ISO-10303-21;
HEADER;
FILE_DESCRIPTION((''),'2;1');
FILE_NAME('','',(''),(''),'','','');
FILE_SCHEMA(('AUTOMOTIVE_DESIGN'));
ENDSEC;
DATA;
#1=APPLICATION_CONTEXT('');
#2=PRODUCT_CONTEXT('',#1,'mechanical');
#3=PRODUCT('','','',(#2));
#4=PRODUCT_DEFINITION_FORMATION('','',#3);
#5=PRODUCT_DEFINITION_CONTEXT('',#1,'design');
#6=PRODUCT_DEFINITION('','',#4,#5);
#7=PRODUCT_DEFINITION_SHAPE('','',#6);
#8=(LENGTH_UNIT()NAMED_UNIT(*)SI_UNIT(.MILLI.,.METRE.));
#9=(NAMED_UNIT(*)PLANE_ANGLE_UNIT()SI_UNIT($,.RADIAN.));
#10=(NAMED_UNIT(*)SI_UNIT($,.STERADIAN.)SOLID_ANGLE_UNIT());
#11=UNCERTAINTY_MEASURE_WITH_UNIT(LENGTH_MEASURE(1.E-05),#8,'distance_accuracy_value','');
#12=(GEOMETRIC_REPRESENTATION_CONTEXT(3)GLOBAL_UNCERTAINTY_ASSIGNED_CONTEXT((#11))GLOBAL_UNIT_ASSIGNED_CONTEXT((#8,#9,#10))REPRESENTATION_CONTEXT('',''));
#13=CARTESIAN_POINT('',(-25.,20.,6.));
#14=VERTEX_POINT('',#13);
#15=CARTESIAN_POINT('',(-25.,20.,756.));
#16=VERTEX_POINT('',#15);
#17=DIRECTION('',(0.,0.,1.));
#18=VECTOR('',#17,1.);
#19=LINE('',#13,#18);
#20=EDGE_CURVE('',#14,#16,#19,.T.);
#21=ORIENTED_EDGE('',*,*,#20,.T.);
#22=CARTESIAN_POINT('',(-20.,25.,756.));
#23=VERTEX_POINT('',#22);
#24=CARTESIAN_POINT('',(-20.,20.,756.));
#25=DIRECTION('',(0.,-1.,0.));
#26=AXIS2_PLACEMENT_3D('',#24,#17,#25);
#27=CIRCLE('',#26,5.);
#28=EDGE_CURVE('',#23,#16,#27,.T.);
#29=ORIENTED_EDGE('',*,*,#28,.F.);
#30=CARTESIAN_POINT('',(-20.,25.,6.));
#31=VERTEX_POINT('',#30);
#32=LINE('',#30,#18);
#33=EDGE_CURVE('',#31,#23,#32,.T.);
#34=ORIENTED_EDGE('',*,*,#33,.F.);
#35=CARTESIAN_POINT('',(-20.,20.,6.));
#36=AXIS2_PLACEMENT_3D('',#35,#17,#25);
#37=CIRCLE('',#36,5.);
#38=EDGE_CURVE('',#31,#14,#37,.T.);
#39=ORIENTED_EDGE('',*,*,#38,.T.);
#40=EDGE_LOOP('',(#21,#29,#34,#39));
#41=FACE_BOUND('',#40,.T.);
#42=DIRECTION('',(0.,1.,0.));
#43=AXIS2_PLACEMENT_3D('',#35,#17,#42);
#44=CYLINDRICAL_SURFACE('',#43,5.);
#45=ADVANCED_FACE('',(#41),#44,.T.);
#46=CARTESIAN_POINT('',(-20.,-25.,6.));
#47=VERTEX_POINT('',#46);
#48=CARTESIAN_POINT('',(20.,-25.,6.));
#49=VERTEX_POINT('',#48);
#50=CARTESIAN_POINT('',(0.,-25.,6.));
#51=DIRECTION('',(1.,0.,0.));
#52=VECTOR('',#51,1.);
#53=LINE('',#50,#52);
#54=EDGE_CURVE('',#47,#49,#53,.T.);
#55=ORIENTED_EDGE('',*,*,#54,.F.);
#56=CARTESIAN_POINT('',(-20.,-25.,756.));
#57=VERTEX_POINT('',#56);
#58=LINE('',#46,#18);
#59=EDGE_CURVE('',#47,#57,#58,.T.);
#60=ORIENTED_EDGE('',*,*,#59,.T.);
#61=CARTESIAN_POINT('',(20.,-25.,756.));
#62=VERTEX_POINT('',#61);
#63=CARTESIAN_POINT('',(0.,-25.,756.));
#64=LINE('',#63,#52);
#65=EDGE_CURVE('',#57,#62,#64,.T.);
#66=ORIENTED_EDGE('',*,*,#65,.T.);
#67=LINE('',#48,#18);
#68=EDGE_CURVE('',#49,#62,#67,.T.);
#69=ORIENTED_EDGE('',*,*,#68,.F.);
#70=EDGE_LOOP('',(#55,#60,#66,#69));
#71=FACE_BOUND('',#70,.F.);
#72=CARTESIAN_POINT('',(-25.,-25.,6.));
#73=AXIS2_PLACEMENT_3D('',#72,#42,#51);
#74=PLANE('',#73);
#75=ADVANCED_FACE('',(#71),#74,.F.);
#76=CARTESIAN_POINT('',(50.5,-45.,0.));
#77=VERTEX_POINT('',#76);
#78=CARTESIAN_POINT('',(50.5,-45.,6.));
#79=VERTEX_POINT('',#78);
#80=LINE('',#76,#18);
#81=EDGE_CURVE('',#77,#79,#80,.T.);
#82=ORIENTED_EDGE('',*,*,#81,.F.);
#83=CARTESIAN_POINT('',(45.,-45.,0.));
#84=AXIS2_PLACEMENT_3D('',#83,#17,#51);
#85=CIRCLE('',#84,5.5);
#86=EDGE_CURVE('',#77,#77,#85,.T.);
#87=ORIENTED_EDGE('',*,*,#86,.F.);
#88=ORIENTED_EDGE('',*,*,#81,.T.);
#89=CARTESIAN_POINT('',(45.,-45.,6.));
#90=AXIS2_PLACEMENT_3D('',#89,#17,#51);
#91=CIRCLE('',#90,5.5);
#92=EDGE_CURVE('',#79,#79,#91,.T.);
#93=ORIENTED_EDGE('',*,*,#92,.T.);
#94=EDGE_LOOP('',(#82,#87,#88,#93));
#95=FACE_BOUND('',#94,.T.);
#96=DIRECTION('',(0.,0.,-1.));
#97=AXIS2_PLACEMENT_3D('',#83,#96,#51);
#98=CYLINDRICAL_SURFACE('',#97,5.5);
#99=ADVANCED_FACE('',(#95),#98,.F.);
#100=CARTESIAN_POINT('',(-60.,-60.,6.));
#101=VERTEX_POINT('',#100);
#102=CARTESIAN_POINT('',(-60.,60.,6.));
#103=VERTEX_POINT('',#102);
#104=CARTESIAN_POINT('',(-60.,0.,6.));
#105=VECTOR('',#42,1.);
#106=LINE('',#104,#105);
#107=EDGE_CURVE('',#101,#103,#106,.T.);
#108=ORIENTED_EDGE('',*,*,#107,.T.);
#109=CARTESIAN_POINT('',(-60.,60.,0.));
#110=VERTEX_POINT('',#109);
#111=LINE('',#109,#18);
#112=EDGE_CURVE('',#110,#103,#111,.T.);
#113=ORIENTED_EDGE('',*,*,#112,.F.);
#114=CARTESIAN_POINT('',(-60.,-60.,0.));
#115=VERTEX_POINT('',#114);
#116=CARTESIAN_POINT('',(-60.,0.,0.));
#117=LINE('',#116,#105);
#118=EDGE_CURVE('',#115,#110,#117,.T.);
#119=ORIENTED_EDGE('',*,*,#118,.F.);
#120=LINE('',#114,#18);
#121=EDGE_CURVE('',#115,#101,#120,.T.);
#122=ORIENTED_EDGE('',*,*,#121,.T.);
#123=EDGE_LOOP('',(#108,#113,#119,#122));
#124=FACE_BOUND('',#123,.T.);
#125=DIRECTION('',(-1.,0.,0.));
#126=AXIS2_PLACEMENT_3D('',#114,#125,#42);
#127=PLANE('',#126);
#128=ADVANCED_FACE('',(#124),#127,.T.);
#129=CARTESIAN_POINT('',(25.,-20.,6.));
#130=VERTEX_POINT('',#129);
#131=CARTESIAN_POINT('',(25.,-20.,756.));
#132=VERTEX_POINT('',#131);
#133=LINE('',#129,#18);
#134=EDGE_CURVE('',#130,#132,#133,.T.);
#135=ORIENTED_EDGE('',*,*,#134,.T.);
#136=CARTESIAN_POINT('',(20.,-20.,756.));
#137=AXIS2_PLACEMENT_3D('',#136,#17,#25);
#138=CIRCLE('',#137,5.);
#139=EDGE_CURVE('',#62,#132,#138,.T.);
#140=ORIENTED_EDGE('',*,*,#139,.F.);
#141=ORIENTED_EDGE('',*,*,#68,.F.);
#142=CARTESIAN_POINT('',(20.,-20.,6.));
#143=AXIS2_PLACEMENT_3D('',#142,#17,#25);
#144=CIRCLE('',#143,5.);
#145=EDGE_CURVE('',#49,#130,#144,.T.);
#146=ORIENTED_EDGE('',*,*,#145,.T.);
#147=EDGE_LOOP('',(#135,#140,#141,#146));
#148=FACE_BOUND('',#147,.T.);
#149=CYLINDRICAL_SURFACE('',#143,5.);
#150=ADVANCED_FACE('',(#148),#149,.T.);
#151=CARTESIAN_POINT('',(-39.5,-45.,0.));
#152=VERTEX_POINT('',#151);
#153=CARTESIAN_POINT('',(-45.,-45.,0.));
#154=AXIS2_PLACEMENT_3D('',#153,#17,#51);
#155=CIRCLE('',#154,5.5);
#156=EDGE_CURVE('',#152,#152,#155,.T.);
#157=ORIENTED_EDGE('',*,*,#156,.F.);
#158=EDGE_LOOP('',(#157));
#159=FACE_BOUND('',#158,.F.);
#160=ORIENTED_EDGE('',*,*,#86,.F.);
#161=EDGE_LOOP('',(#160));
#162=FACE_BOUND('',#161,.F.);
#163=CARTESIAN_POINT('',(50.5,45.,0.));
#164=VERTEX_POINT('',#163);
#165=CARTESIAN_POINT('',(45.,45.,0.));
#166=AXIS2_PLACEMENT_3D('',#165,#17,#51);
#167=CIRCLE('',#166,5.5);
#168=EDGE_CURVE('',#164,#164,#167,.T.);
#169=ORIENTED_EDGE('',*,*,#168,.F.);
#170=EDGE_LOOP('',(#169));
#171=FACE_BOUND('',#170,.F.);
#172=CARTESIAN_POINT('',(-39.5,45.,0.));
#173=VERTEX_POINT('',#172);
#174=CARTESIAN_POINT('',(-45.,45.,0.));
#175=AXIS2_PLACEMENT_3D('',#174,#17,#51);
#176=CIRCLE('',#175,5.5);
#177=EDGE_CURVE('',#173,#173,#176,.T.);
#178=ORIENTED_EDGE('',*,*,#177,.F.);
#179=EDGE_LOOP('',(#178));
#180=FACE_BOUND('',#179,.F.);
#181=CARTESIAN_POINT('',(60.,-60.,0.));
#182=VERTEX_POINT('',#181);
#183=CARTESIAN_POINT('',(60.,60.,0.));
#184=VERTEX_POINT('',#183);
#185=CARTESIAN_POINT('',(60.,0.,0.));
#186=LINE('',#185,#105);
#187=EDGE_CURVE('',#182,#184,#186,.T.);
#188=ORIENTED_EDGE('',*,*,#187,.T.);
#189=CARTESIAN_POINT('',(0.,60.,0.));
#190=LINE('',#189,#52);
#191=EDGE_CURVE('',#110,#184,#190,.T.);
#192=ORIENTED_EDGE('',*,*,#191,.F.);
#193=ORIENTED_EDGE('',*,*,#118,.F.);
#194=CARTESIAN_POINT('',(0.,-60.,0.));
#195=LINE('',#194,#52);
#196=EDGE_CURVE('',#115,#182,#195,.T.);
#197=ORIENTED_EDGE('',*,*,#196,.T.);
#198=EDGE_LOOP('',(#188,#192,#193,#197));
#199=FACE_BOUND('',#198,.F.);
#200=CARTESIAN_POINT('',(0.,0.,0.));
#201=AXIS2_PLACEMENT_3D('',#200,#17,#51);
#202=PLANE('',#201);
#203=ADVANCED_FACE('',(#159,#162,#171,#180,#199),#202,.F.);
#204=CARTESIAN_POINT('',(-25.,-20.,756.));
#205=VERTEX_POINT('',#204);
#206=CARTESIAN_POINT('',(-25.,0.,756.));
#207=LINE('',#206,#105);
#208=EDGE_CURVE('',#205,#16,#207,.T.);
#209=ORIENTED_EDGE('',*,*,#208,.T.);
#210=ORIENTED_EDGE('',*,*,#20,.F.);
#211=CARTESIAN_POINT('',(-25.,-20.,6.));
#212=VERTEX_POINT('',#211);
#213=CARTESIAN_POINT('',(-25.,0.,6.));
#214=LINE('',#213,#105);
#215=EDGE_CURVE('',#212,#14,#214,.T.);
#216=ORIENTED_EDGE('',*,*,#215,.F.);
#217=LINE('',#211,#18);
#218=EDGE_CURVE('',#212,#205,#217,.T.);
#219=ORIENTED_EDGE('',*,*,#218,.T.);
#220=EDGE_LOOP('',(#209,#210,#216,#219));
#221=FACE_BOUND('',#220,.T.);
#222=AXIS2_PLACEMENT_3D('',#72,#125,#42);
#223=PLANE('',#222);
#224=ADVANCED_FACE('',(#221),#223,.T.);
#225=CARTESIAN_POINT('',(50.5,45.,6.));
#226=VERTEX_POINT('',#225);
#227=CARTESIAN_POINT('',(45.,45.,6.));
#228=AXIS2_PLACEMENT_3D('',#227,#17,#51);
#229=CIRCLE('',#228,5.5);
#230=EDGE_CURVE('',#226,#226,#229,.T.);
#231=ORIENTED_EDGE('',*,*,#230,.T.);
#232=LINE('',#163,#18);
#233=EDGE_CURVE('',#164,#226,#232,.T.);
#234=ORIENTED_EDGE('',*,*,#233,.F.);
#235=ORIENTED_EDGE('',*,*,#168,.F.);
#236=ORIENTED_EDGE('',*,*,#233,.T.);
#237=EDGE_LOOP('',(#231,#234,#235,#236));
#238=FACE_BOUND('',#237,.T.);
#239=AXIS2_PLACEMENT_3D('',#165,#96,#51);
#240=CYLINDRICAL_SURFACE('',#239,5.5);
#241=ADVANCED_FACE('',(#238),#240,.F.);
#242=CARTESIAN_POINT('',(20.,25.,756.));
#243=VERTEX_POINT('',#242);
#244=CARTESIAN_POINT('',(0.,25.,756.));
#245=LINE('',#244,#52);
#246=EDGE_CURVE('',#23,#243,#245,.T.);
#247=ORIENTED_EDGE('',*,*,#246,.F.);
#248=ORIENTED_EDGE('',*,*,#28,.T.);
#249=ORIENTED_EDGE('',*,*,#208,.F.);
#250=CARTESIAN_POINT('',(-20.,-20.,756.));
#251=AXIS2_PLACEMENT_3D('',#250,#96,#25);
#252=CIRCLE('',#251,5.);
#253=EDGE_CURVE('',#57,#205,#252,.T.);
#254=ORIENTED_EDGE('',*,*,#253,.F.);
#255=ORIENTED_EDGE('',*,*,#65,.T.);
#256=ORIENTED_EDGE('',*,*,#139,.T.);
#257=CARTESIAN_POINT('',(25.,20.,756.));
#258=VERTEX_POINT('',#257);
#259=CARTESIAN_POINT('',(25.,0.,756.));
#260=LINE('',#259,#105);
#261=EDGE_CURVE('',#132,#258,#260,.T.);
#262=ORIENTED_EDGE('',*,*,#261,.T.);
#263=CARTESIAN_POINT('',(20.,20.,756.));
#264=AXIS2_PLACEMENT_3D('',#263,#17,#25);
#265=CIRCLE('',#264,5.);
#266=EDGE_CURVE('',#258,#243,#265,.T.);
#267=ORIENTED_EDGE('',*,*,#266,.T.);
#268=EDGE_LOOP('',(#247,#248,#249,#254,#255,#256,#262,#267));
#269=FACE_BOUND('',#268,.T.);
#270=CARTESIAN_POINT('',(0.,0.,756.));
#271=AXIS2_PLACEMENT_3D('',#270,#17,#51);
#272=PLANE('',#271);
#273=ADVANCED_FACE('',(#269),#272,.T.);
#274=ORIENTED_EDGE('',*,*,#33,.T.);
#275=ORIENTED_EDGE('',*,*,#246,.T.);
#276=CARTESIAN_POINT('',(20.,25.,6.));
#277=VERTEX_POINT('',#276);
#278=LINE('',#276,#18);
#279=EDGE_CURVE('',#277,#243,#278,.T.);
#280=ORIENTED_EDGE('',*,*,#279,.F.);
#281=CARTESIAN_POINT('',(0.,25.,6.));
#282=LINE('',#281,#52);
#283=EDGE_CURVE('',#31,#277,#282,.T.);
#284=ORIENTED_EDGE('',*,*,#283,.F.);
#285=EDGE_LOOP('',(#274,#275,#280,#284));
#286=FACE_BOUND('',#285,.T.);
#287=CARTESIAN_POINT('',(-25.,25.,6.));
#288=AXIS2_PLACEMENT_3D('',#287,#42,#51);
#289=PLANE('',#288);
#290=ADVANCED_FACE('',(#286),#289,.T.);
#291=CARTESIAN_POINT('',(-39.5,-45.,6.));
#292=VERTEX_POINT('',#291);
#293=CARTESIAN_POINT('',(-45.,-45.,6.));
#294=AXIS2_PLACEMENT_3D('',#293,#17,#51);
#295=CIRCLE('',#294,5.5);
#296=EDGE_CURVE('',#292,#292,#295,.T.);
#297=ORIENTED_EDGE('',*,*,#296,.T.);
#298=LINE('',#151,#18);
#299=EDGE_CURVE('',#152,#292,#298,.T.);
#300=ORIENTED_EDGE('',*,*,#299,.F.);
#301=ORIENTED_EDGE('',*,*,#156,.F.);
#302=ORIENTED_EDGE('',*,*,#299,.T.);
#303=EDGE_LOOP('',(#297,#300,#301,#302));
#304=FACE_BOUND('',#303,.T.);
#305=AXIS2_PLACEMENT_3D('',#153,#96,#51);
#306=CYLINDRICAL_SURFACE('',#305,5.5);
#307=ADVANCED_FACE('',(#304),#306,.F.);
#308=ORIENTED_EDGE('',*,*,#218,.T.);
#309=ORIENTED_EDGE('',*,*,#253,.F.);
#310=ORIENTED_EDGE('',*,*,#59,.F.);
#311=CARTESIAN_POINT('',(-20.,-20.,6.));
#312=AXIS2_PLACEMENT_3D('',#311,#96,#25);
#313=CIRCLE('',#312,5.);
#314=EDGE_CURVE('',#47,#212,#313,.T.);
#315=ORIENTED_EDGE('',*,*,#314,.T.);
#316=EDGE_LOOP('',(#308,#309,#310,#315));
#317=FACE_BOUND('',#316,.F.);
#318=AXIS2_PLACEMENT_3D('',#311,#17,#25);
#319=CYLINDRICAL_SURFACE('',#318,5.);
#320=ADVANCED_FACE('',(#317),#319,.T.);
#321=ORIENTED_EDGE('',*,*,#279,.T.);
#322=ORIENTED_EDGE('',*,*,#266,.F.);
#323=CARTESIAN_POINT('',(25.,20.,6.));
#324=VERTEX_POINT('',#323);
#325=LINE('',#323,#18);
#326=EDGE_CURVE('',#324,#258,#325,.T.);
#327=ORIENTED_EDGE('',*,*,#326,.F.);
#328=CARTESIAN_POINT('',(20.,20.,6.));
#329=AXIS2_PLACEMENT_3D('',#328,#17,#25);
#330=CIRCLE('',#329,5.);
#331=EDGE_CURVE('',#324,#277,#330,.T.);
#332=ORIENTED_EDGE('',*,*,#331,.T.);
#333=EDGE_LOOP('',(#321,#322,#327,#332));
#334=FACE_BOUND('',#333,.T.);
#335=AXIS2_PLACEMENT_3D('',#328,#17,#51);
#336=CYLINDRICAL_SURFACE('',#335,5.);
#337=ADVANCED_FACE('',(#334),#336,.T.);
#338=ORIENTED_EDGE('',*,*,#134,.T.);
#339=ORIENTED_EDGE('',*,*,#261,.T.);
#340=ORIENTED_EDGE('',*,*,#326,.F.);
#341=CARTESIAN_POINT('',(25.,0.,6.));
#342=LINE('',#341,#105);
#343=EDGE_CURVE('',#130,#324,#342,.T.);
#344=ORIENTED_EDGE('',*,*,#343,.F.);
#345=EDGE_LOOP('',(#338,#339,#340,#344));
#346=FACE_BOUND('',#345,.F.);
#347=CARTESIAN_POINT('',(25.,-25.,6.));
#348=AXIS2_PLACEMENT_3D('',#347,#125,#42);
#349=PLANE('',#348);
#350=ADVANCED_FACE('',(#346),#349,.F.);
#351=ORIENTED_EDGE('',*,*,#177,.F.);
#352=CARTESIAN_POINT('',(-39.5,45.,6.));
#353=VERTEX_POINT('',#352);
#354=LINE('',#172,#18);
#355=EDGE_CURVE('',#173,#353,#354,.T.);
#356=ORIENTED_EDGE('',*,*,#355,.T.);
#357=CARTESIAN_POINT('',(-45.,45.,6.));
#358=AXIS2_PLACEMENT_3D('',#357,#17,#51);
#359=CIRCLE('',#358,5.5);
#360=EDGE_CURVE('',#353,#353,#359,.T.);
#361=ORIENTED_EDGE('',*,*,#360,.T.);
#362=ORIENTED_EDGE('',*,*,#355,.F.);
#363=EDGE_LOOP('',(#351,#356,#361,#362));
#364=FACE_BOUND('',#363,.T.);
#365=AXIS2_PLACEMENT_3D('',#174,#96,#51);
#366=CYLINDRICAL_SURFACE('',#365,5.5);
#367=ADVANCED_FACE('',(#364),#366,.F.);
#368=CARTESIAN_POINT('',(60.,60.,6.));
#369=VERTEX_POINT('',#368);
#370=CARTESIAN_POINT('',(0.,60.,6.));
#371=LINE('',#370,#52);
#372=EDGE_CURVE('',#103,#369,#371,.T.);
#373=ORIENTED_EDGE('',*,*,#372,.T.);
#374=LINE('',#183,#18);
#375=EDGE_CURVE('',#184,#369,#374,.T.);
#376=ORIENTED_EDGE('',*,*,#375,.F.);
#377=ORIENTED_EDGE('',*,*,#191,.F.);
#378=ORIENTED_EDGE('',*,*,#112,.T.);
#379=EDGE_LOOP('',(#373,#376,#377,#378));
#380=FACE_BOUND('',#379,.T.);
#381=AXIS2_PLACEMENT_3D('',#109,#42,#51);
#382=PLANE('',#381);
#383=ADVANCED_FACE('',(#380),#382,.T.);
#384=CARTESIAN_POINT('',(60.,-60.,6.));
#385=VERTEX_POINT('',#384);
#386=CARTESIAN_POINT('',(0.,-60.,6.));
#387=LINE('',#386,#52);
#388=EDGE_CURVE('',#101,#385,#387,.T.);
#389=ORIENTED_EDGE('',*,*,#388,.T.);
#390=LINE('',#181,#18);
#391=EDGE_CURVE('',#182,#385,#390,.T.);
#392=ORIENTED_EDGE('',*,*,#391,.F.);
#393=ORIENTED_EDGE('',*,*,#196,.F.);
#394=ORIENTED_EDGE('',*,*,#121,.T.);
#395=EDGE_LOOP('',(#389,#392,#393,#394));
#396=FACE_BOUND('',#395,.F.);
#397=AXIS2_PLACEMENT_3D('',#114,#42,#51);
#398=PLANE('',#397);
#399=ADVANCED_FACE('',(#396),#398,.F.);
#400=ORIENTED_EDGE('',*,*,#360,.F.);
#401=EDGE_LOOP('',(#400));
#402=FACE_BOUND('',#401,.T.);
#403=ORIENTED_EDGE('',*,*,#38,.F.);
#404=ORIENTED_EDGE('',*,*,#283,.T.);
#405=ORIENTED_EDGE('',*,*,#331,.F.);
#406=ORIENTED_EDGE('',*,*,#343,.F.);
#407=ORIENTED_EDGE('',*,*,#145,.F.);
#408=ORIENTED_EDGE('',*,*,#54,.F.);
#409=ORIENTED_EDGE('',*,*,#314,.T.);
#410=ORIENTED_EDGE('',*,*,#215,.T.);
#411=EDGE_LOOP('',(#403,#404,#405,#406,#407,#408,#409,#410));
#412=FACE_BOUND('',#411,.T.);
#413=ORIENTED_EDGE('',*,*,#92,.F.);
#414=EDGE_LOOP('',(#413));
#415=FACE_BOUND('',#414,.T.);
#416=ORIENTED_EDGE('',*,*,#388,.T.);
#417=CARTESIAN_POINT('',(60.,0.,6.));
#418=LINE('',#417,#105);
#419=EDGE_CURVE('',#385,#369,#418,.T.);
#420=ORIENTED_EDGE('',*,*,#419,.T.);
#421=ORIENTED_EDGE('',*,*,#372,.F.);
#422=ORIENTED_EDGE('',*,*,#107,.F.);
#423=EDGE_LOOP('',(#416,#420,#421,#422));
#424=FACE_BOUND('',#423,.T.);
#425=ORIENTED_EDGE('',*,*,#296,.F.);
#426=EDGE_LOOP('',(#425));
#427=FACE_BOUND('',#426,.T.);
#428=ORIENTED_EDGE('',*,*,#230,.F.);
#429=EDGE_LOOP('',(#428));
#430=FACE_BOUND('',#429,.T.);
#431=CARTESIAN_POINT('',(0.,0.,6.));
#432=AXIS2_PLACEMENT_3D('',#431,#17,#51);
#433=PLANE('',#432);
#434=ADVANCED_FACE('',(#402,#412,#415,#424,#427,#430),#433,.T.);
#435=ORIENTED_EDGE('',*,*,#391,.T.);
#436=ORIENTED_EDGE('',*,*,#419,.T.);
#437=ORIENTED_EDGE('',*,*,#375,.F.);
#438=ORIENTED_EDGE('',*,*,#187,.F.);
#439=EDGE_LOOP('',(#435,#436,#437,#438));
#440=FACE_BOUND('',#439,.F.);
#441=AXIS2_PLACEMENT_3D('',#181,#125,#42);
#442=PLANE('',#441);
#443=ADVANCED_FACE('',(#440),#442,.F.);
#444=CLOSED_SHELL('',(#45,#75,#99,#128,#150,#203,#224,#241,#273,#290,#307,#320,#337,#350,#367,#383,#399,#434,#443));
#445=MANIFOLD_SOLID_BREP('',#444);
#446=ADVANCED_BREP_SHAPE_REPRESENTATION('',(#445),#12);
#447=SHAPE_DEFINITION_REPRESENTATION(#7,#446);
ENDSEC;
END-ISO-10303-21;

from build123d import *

# Parameters (mm, degrees)
F0_W     = 120
F0_H     = 120
F0_R     = 5.5
F1_DEPTH = 6
F2_W     = 50
F2_H     = 50
F3_DEPTH = 750
F4_R     = 5


# Not quite as in the source:
# - a feature names something its author has since deleted; it is built from what else it names


with BuildPart() as f1:
    # F0 (on Top) → F1 (new body)
    with BuildSketch(Plane.XY):
        Rectangle(F0_W, F0_H)
        with Locations((-45, -45)):
            Circle(F0_R, mode=Mode.SUBTRACT)
        with Locations((45, -45)):
            Circle(F0_R, mode=Mode.SUBTRACT)
        with Locations((-45, 45)):
            Circle(F0_R, mode=Mode.SUBTRACT)
        with Locations((45, 45)):
            Circle(F0_R, mode=Mode.SUBTRACT)
    extrude(amount=F1_DEPTH)

    # F2 (on face) → F3 (join)
    with BuildSketch(Plane.XY.offset(6)):
        Rectangle(F2_W, F2_H)
    extrude(amount=F3_DEPTH)

    # F4
    f4_edges = [f1.edges().sort_by_distance(p)[0] for p in [
        (-25, -25, 381),
        (25, -25, 381),
        (25, 25, 381),
        (-25, 25, 381),
    ]]
    fillet(f4_edges, radius=F4_R)


solid = f1.part
